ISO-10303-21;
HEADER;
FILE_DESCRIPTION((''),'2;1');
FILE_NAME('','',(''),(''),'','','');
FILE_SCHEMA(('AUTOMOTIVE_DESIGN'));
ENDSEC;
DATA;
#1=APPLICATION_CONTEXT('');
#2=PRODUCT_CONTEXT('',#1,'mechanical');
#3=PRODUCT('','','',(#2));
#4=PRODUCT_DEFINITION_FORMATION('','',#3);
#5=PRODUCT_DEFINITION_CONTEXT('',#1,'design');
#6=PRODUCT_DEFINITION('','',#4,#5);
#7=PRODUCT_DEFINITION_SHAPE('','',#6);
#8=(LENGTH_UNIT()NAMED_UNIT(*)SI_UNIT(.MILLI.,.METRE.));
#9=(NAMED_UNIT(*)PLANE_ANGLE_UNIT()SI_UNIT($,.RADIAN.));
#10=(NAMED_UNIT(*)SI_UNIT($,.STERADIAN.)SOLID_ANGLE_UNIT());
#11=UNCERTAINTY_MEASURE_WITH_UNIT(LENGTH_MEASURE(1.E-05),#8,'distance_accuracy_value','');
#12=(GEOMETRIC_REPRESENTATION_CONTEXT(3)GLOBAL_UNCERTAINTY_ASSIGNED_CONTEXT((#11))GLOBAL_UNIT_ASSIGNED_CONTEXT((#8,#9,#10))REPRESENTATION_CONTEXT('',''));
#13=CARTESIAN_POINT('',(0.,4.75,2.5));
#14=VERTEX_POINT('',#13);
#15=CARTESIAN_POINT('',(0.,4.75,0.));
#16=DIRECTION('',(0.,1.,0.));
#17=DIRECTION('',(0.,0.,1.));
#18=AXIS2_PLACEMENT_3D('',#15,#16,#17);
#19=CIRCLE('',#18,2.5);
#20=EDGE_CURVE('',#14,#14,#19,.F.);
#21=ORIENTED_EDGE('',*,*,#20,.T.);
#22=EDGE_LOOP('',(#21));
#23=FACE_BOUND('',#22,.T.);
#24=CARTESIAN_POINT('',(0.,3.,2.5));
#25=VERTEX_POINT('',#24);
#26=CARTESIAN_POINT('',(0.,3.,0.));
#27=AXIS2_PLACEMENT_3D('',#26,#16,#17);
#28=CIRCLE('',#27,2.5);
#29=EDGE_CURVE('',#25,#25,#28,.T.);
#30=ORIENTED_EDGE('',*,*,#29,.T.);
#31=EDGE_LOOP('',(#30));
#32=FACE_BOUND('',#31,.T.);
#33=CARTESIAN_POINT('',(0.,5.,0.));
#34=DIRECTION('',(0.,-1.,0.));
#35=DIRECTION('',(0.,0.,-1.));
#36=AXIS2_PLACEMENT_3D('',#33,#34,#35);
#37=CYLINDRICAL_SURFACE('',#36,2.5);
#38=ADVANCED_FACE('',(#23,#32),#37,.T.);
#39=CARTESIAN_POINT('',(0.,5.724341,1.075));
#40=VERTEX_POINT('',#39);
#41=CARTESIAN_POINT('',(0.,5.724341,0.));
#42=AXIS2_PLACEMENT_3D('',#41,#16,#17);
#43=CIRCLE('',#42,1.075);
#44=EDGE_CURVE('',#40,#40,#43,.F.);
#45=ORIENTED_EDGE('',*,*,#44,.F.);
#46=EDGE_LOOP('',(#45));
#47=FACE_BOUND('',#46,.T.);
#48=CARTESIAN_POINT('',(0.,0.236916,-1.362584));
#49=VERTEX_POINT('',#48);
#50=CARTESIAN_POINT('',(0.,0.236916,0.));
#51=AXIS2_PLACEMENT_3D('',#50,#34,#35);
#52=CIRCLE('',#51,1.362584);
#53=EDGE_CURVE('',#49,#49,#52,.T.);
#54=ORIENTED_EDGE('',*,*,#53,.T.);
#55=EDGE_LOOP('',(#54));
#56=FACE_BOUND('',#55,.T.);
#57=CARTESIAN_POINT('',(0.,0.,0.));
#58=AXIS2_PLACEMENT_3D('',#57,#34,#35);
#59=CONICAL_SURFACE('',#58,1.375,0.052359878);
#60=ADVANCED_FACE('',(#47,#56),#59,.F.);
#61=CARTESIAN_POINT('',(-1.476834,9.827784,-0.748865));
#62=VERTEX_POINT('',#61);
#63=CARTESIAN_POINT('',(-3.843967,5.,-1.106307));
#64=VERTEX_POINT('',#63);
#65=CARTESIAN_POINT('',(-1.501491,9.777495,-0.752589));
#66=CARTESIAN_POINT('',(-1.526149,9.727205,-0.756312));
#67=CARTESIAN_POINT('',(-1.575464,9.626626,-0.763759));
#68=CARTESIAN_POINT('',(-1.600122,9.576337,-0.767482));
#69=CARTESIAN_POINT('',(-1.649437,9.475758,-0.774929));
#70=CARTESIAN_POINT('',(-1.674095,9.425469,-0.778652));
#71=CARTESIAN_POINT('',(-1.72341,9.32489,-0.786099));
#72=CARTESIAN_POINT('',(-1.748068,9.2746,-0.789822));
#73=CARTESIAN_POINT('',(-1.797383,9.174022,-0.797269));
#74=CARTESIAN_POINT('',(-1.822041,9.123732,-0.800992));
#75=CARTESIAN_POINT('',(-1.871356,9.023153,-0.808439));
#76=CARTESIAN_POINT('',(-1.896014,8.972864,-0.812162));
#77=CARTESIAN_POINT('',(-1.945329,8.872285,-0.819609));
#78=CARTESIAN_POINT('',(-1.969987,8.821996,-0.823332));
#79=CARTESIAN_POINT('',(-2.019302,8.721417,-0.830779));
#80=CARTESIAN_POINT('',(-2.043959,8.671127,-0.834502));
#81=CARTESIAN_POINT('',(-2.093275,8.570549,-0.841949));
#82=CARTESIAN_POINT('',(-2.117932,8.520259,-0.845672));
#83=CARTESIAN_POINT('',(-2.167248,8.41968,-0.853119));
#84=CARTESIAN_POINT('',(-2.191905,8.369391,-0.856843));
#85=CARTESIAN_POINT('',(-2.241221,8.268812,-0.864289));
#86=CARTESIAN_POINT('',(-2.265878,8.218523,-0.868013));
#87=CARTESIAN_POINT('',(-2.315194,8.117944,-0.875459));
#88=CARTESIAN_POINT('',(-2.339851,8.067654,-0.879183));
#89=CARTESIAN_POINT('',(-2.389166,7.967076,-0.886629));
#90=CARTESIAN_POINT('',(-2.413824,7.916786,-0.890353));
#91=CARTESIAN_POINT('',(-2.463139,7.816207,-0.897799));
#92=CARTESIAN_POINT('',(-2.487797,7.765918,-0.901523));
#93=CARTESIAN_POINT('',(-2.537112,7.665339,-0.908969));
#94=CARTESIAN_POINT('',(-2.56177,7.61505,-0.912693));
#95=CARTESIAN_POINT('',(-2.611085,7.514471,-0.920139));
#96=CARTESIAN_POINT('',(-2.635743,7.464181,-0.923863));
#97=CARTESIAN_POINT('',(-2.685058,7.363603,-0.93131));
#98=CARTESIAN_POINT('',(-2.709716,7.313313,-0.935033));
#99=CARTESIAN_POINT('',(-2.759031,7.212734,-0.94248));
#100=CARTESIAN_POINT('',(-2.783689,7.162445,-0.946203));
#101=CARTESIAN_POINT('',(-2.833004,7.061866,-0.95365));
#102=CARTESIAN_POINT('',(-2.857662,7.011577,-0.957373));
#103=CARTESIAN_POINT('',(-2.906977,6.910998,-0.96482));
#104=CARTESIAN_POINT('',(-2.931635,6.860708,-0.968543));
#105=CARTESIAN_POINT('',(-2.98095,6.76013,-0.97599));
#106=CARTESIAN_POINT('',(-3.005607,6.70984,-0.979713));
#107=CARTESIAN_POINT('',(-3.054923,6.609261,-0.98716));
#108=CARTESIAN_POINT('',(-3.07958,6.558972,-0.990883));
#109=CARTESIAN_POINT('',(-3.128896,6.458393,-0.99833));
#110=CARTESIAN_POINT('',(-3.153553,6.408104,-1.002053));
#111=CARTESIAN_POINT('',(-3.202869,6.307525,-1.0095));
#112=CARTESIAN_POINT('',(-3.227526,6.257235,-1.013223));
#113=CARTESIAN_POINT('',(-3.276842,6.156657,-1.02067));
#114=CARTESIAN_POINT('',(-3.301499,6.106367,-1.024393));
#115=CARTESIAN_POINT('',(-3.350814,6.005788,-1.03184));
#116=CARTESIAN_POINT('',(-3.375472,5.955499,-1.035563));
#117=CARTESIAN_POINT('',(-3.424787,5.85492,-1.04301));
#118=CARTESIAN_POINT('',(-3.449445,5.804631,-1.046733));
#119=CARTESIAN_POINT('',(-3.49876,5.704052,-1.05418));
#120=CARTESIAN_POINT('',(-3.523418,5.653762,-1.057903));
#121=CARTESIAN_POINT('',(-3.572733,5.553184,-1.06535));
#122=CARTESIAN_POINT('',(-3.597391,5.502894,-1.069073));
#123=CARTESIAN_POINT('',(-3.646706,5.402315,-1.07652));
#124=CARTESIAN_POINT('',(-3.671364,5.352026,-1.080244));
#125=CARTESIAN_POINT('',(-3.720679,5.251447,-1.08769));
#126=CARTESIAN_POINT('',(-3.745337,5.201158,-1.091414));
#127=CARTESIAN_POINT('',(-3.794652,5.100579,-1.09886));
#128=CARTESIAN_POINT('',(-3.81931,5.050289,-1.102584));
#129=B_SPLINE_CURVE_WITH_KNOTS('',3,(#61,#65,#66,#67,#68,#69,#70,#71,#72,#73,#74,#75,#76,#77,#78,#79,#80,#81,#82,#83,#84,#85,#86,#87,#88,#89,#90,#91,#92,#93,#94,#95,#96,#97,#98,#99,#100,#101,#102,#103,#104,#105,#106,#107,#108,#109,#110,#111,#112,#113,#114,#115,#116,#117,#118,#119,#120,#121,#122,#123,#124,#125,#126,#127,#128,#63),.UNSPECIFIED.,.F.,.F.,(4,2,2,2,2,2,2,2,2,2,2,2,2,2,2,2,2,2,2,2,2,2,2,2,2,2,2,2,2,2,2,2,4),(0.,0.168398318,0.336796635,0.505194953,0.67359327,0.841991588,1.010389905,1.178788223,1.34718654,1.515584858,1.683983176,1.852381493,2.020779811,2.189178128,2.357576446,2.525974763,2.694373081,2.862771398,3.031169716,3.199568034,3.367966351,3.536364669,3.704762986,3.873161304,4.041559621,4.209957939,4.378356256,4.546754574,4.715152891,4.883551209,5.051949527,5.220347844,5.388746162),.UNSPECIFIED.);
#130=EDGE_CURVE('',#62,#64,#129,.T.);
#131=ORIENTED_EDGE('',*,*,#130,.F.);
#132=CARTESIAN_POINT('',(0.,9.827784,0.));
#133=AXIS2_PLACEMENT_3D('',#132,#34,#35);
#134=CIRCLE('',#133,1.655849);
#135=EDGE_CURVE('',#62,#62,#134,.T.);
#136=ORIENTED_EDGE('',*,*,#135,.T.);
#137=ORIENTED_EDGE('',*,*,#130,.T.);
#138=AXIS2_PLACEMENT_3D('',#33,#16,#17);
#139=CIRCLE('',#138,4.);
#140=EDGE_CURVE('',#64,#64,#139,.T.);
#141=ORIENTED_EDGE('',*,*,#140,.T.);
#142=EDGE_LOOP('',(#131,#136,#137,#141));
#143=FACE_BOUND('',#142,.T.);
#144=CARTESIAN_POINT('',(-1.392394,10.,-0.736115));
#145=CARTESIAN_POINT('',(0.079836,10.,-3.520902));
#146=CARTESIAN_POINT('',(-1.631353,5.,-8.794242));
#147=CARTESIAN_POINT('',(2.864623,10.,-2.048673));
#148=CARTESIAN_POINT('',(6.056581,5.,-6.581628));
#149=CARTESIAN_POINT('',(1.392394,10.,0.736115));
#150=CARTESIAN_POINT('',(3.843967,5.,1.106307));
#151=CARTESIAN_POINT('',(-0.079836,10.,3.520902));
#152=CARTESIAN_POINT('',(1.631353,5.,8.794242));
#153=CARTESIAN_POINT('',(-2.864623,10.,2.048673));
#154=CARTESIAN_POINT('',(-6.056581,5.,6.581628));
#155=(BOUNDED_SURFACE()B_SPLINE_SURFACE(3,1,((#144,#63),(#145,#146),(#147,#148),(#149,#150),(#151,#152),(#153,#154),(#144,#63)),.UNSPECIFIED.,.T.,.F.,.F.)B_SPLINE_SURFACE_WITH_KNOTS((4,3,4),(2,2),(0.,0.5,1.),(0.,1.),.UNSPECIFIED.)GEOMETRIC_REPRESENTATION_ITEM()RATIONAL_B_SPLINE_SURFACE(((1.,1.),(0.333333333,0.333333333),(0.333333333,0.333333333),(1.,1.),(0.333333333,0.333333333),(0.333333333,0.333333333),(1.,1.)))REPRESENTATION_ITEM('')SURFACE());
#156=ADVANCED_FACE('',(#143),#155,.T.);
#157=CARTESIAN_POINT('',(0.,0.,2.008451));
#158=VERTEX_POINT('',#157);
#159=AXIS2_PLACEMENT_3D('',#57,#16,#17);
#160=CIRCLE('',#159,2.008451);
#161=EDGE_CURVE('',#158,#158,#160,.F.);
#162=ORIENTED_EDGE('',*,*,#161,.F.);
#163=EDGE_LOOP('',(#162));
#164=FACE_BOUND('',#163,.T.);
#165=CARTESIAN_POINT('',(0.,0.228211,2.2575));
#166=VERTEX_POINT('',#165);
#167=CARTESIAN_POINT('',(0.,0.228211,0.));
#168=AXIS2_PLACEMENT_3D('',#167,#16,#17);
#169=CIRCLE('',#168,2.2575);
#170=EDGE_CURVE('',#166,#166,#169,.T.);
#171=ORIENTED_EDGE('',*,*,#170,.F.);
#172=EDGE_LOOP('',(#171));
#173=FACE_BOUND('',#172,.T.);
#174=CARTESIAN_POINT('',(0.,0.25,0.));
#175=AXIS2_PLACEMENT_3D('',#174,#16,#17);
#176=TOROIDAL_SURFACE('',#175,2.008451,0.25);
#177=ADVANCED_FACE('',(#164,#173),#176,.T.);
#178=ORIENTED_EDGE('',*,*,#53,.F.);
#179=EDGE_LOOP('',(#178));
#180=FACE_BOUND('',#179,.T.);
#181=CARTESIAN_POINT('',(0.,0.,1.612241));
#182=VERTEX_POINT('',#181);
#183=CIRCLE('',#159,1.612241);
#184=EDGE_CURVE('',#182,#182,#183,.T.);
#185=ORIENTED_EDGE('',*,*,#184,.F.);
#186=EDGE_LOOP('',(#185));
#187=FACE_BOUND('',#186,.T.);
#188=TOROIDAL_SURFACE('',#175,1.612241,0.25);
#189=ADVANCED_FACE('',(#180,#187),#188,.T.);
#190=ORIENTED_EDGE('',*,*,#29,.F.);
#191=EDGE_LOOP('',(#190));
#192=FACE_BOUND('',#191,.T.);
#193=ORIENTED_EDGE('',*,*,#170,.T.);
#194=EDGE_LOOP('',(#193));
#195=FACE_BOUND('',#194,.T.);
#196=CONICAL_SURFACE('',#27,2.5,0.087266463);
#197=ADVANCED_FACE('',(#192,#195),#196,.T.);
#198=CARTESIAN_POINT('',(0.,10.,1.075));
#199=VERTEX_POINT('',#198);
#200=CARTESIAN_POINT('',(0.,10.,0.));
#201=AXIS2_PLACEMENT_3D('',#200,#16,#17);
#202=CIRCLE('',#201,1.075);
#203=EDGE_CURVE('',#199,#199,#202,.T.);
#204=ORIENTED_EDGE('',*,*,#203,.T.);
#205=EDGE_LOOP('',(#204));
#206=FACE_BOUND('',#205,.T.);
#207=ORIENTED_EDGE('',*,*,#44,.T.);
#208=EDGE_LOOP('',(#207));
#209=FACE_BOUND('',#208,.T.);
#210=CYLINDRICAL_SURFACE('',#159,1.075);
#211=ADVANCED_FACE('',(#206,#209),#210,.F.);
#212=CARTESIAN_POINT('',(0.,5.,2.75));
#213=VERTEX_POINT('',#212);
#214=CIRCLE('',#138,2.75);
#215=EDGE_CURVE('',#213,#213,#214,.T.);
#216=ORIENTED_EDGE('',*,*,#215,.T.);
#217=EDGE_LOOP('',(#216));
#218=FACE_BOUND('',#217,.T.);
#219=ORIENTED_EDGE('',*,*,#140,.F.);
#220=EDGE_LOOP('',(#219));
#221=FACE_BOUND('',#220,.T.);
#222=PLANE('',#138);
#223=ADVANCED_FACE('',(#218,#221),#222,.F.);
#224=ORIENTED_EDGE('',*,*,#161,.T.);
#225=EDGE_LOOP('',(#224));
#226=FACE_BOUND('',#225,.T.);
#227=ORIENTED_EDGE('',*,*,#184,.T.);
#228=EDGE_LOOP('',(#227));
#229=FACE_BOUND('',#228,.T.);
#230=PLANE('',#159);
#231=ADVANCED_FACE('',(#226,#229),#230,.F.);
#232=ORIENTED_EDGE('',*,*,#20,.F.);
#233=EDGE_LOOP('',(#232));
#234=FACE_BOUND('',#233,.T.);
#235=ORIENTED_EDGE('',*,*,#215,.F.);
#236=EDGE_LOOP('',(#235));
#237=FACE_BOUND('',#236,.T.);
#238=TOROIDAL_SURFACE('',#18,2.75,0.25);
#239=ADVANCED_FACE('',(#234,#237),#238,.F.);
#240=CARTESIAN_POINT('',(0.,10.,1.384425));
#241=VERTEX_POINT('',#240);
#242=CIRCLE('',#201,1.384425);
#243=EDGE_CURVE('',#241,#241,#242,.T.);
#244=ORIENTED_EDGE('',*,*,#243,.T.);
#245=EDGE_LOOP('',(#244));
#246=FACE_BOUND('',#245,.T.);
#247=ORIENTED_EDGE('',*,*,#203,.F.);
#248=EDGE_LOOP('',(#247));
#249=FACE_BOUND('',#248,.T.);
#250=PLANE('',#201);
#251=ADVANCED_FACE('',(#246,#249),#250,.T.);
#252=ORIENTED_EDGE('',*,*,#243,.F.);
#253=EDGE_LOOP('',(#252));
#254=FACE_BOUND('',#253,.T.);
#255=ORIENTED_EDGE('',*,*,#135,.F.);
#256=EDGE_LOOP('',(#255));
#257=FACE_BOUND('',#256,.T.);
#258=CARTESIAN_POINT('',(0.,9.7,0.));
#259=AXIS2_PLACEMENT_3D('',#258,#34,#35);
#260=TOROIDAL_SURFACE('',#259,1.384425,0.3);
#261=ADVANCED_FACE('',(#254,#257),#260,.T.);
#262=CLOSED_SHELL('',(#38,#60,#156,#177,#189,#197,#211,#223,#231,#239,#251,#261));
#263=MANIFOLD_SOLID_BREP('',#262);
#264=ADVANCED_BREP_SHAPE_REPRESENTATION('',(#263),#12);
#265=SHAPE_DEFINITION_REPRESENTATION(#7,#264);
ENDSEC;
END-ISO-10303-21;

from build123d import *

# Parameters (mm, degrees)
SKETCH1_R           = 2.5
BOSS_EXTRUDE1_DEPTH = 5
SKETCH4_R           = 1.075
CUT_EXTRUDE1_DEPTH  = 12.489125363
CHAMFER1_SIZE       = 0.3
CHAMFER1_SIZE2      = 5.724341006
CHAMFER2_SIZE       = 3
CHAMFER2_SIZE2      = 0.262465991
FILLET1_R           = 0.3
FILLET2_R           = 0.25
FILLET4_R           = 0.25


with BuildPart() as part:
    # Sketch1 → Boss-Extrude1 (new body)
    with BuildSketch(Plane(origin=(0, 0, 0), x_dir=(1, 0, 0), z_dir=(0, 1, 0))):
        with Locations(Location((0, 0, 0), (0, 0, 270))):
            Circle(SKETCH1_R)
    extrude(amount=BOSS_EXTRUDE1_DEPTH)

    # Loft1: read off the stored shape, not the designer's step
    # Loft1: loft between two sections, ruled curve by curve
    loft1_from = [
        Edge.make_bspline([(-1.392393657, 10, -0.736114736), (0.079835815, 10, -3.52090205), (2.864623129, 10, -2.048672577), (1.392393657, 10, 0.736114736), (-0.079835815, 10, 3.52090205), (-2.864623129, 10, 2.048672577), (-1.392393657, 10, -0.736114736)], [0, 0, 0, 0, 0.5, 0.5, 0.5, 1, 1, 1, 1], 3, [1, 0.333333333, 0.333333333, 1, 0.333333333, 0.333333333, 1]),
    ]
    loft1_to = [
        Edge.make_bspline([(-3.843967333, 5, -1.106306985), (-1.631353363, 5, -8.79424165), (6.056581302, 5, -6.581627681), (3.843967333, 5, 1.106306985), (1.631353363, 5, 8.79424165), (-6.056581302, 5, 6.581627681), (-3.843967333, 5, -1.106306985)], [0, 0, 0, 0, 0.5, 0.5, 0.5, 1, 1, 1, 1], 3, [1, 0.333333333, 0.333333333, 1, 0.333333333, 0.333333333, 1]),
    ]
    loft1 = Solid(Shell([*[Face.make_surface_from_curves(loft1_from[k], loft1_to[k]) for k in range(1)], Face(Wire(loft1_from)), Face(Wire(loft1_to))]))
    add(loft1)

    # Sketch4 → Cut-Extrude1 (cut, through all)
    with BuildSketch(Plane(origin=(0, 10, 0), x_dir=(1, 0, 0), z_dir=(0, 1, 0))):
        with Locations(Location((0, 0, 0), (0, 0, 270))):
            Circle(SKETCH4_R)
    extrude(amount=-CUT_EXTRUDE1_DEPTH, mode=Mode.SUBTRACT)

    # Chamfer1
    chamfer1_edges = [part.edges().sort_by_distance(p)[0] for p in [
        (0, 0, -1.075),
    ]]
    chamfer1_side = [part.faces().sort_by_distance(p)[0] for p in [
        (0, 0, -2.429289322),
    ]]
    chamfer(chamfer1_edges, length=CHAMFER1_SIZE, length2=CHAMFER1_SIZE2, reference=chamfer1_side[0])

    # Chamfer2
    chamfer2_edges = [part.edges().sort_by_distance(p)[0] for p in [
        (0, 0, -2.5),
    ]]
    chamfer2_side = [part.faces().sort_by_distance(p)[0] for p in [
        (0, 2.5, -2.5),
    ]]
    chamfer(chamfer2_edges, length=CHAMFER2_SIZE, length2=CHAMFER2_SIZE2, reference=chamfer2_side[0])

    # Fillet1
    fillet1_edges = [part.edges().sort_by_distance(p)[0] for p in [
        (1.392393657, 10, 0.736114736),
    ]]
    fillet(fillet1_edges, radius=FILLET1_R)

    # Fillet2
    fillet2_edges = [part.edges().sort_by_distance(p)[0] for p in [
        (0, 5, -2.5),
    ]]
    fillet(fillet2_edges, radius=FILLET2_R)

    # Fillet4
    fillet4_edges = [part.edges().sort_by_distance(p)[0] for p in [
        (0, 0, -1.375),
        (0, 0, -2.237534009),
    ]]
    fillet(fillet4_edges, radius=FILLET4_R)


solid = part.part
